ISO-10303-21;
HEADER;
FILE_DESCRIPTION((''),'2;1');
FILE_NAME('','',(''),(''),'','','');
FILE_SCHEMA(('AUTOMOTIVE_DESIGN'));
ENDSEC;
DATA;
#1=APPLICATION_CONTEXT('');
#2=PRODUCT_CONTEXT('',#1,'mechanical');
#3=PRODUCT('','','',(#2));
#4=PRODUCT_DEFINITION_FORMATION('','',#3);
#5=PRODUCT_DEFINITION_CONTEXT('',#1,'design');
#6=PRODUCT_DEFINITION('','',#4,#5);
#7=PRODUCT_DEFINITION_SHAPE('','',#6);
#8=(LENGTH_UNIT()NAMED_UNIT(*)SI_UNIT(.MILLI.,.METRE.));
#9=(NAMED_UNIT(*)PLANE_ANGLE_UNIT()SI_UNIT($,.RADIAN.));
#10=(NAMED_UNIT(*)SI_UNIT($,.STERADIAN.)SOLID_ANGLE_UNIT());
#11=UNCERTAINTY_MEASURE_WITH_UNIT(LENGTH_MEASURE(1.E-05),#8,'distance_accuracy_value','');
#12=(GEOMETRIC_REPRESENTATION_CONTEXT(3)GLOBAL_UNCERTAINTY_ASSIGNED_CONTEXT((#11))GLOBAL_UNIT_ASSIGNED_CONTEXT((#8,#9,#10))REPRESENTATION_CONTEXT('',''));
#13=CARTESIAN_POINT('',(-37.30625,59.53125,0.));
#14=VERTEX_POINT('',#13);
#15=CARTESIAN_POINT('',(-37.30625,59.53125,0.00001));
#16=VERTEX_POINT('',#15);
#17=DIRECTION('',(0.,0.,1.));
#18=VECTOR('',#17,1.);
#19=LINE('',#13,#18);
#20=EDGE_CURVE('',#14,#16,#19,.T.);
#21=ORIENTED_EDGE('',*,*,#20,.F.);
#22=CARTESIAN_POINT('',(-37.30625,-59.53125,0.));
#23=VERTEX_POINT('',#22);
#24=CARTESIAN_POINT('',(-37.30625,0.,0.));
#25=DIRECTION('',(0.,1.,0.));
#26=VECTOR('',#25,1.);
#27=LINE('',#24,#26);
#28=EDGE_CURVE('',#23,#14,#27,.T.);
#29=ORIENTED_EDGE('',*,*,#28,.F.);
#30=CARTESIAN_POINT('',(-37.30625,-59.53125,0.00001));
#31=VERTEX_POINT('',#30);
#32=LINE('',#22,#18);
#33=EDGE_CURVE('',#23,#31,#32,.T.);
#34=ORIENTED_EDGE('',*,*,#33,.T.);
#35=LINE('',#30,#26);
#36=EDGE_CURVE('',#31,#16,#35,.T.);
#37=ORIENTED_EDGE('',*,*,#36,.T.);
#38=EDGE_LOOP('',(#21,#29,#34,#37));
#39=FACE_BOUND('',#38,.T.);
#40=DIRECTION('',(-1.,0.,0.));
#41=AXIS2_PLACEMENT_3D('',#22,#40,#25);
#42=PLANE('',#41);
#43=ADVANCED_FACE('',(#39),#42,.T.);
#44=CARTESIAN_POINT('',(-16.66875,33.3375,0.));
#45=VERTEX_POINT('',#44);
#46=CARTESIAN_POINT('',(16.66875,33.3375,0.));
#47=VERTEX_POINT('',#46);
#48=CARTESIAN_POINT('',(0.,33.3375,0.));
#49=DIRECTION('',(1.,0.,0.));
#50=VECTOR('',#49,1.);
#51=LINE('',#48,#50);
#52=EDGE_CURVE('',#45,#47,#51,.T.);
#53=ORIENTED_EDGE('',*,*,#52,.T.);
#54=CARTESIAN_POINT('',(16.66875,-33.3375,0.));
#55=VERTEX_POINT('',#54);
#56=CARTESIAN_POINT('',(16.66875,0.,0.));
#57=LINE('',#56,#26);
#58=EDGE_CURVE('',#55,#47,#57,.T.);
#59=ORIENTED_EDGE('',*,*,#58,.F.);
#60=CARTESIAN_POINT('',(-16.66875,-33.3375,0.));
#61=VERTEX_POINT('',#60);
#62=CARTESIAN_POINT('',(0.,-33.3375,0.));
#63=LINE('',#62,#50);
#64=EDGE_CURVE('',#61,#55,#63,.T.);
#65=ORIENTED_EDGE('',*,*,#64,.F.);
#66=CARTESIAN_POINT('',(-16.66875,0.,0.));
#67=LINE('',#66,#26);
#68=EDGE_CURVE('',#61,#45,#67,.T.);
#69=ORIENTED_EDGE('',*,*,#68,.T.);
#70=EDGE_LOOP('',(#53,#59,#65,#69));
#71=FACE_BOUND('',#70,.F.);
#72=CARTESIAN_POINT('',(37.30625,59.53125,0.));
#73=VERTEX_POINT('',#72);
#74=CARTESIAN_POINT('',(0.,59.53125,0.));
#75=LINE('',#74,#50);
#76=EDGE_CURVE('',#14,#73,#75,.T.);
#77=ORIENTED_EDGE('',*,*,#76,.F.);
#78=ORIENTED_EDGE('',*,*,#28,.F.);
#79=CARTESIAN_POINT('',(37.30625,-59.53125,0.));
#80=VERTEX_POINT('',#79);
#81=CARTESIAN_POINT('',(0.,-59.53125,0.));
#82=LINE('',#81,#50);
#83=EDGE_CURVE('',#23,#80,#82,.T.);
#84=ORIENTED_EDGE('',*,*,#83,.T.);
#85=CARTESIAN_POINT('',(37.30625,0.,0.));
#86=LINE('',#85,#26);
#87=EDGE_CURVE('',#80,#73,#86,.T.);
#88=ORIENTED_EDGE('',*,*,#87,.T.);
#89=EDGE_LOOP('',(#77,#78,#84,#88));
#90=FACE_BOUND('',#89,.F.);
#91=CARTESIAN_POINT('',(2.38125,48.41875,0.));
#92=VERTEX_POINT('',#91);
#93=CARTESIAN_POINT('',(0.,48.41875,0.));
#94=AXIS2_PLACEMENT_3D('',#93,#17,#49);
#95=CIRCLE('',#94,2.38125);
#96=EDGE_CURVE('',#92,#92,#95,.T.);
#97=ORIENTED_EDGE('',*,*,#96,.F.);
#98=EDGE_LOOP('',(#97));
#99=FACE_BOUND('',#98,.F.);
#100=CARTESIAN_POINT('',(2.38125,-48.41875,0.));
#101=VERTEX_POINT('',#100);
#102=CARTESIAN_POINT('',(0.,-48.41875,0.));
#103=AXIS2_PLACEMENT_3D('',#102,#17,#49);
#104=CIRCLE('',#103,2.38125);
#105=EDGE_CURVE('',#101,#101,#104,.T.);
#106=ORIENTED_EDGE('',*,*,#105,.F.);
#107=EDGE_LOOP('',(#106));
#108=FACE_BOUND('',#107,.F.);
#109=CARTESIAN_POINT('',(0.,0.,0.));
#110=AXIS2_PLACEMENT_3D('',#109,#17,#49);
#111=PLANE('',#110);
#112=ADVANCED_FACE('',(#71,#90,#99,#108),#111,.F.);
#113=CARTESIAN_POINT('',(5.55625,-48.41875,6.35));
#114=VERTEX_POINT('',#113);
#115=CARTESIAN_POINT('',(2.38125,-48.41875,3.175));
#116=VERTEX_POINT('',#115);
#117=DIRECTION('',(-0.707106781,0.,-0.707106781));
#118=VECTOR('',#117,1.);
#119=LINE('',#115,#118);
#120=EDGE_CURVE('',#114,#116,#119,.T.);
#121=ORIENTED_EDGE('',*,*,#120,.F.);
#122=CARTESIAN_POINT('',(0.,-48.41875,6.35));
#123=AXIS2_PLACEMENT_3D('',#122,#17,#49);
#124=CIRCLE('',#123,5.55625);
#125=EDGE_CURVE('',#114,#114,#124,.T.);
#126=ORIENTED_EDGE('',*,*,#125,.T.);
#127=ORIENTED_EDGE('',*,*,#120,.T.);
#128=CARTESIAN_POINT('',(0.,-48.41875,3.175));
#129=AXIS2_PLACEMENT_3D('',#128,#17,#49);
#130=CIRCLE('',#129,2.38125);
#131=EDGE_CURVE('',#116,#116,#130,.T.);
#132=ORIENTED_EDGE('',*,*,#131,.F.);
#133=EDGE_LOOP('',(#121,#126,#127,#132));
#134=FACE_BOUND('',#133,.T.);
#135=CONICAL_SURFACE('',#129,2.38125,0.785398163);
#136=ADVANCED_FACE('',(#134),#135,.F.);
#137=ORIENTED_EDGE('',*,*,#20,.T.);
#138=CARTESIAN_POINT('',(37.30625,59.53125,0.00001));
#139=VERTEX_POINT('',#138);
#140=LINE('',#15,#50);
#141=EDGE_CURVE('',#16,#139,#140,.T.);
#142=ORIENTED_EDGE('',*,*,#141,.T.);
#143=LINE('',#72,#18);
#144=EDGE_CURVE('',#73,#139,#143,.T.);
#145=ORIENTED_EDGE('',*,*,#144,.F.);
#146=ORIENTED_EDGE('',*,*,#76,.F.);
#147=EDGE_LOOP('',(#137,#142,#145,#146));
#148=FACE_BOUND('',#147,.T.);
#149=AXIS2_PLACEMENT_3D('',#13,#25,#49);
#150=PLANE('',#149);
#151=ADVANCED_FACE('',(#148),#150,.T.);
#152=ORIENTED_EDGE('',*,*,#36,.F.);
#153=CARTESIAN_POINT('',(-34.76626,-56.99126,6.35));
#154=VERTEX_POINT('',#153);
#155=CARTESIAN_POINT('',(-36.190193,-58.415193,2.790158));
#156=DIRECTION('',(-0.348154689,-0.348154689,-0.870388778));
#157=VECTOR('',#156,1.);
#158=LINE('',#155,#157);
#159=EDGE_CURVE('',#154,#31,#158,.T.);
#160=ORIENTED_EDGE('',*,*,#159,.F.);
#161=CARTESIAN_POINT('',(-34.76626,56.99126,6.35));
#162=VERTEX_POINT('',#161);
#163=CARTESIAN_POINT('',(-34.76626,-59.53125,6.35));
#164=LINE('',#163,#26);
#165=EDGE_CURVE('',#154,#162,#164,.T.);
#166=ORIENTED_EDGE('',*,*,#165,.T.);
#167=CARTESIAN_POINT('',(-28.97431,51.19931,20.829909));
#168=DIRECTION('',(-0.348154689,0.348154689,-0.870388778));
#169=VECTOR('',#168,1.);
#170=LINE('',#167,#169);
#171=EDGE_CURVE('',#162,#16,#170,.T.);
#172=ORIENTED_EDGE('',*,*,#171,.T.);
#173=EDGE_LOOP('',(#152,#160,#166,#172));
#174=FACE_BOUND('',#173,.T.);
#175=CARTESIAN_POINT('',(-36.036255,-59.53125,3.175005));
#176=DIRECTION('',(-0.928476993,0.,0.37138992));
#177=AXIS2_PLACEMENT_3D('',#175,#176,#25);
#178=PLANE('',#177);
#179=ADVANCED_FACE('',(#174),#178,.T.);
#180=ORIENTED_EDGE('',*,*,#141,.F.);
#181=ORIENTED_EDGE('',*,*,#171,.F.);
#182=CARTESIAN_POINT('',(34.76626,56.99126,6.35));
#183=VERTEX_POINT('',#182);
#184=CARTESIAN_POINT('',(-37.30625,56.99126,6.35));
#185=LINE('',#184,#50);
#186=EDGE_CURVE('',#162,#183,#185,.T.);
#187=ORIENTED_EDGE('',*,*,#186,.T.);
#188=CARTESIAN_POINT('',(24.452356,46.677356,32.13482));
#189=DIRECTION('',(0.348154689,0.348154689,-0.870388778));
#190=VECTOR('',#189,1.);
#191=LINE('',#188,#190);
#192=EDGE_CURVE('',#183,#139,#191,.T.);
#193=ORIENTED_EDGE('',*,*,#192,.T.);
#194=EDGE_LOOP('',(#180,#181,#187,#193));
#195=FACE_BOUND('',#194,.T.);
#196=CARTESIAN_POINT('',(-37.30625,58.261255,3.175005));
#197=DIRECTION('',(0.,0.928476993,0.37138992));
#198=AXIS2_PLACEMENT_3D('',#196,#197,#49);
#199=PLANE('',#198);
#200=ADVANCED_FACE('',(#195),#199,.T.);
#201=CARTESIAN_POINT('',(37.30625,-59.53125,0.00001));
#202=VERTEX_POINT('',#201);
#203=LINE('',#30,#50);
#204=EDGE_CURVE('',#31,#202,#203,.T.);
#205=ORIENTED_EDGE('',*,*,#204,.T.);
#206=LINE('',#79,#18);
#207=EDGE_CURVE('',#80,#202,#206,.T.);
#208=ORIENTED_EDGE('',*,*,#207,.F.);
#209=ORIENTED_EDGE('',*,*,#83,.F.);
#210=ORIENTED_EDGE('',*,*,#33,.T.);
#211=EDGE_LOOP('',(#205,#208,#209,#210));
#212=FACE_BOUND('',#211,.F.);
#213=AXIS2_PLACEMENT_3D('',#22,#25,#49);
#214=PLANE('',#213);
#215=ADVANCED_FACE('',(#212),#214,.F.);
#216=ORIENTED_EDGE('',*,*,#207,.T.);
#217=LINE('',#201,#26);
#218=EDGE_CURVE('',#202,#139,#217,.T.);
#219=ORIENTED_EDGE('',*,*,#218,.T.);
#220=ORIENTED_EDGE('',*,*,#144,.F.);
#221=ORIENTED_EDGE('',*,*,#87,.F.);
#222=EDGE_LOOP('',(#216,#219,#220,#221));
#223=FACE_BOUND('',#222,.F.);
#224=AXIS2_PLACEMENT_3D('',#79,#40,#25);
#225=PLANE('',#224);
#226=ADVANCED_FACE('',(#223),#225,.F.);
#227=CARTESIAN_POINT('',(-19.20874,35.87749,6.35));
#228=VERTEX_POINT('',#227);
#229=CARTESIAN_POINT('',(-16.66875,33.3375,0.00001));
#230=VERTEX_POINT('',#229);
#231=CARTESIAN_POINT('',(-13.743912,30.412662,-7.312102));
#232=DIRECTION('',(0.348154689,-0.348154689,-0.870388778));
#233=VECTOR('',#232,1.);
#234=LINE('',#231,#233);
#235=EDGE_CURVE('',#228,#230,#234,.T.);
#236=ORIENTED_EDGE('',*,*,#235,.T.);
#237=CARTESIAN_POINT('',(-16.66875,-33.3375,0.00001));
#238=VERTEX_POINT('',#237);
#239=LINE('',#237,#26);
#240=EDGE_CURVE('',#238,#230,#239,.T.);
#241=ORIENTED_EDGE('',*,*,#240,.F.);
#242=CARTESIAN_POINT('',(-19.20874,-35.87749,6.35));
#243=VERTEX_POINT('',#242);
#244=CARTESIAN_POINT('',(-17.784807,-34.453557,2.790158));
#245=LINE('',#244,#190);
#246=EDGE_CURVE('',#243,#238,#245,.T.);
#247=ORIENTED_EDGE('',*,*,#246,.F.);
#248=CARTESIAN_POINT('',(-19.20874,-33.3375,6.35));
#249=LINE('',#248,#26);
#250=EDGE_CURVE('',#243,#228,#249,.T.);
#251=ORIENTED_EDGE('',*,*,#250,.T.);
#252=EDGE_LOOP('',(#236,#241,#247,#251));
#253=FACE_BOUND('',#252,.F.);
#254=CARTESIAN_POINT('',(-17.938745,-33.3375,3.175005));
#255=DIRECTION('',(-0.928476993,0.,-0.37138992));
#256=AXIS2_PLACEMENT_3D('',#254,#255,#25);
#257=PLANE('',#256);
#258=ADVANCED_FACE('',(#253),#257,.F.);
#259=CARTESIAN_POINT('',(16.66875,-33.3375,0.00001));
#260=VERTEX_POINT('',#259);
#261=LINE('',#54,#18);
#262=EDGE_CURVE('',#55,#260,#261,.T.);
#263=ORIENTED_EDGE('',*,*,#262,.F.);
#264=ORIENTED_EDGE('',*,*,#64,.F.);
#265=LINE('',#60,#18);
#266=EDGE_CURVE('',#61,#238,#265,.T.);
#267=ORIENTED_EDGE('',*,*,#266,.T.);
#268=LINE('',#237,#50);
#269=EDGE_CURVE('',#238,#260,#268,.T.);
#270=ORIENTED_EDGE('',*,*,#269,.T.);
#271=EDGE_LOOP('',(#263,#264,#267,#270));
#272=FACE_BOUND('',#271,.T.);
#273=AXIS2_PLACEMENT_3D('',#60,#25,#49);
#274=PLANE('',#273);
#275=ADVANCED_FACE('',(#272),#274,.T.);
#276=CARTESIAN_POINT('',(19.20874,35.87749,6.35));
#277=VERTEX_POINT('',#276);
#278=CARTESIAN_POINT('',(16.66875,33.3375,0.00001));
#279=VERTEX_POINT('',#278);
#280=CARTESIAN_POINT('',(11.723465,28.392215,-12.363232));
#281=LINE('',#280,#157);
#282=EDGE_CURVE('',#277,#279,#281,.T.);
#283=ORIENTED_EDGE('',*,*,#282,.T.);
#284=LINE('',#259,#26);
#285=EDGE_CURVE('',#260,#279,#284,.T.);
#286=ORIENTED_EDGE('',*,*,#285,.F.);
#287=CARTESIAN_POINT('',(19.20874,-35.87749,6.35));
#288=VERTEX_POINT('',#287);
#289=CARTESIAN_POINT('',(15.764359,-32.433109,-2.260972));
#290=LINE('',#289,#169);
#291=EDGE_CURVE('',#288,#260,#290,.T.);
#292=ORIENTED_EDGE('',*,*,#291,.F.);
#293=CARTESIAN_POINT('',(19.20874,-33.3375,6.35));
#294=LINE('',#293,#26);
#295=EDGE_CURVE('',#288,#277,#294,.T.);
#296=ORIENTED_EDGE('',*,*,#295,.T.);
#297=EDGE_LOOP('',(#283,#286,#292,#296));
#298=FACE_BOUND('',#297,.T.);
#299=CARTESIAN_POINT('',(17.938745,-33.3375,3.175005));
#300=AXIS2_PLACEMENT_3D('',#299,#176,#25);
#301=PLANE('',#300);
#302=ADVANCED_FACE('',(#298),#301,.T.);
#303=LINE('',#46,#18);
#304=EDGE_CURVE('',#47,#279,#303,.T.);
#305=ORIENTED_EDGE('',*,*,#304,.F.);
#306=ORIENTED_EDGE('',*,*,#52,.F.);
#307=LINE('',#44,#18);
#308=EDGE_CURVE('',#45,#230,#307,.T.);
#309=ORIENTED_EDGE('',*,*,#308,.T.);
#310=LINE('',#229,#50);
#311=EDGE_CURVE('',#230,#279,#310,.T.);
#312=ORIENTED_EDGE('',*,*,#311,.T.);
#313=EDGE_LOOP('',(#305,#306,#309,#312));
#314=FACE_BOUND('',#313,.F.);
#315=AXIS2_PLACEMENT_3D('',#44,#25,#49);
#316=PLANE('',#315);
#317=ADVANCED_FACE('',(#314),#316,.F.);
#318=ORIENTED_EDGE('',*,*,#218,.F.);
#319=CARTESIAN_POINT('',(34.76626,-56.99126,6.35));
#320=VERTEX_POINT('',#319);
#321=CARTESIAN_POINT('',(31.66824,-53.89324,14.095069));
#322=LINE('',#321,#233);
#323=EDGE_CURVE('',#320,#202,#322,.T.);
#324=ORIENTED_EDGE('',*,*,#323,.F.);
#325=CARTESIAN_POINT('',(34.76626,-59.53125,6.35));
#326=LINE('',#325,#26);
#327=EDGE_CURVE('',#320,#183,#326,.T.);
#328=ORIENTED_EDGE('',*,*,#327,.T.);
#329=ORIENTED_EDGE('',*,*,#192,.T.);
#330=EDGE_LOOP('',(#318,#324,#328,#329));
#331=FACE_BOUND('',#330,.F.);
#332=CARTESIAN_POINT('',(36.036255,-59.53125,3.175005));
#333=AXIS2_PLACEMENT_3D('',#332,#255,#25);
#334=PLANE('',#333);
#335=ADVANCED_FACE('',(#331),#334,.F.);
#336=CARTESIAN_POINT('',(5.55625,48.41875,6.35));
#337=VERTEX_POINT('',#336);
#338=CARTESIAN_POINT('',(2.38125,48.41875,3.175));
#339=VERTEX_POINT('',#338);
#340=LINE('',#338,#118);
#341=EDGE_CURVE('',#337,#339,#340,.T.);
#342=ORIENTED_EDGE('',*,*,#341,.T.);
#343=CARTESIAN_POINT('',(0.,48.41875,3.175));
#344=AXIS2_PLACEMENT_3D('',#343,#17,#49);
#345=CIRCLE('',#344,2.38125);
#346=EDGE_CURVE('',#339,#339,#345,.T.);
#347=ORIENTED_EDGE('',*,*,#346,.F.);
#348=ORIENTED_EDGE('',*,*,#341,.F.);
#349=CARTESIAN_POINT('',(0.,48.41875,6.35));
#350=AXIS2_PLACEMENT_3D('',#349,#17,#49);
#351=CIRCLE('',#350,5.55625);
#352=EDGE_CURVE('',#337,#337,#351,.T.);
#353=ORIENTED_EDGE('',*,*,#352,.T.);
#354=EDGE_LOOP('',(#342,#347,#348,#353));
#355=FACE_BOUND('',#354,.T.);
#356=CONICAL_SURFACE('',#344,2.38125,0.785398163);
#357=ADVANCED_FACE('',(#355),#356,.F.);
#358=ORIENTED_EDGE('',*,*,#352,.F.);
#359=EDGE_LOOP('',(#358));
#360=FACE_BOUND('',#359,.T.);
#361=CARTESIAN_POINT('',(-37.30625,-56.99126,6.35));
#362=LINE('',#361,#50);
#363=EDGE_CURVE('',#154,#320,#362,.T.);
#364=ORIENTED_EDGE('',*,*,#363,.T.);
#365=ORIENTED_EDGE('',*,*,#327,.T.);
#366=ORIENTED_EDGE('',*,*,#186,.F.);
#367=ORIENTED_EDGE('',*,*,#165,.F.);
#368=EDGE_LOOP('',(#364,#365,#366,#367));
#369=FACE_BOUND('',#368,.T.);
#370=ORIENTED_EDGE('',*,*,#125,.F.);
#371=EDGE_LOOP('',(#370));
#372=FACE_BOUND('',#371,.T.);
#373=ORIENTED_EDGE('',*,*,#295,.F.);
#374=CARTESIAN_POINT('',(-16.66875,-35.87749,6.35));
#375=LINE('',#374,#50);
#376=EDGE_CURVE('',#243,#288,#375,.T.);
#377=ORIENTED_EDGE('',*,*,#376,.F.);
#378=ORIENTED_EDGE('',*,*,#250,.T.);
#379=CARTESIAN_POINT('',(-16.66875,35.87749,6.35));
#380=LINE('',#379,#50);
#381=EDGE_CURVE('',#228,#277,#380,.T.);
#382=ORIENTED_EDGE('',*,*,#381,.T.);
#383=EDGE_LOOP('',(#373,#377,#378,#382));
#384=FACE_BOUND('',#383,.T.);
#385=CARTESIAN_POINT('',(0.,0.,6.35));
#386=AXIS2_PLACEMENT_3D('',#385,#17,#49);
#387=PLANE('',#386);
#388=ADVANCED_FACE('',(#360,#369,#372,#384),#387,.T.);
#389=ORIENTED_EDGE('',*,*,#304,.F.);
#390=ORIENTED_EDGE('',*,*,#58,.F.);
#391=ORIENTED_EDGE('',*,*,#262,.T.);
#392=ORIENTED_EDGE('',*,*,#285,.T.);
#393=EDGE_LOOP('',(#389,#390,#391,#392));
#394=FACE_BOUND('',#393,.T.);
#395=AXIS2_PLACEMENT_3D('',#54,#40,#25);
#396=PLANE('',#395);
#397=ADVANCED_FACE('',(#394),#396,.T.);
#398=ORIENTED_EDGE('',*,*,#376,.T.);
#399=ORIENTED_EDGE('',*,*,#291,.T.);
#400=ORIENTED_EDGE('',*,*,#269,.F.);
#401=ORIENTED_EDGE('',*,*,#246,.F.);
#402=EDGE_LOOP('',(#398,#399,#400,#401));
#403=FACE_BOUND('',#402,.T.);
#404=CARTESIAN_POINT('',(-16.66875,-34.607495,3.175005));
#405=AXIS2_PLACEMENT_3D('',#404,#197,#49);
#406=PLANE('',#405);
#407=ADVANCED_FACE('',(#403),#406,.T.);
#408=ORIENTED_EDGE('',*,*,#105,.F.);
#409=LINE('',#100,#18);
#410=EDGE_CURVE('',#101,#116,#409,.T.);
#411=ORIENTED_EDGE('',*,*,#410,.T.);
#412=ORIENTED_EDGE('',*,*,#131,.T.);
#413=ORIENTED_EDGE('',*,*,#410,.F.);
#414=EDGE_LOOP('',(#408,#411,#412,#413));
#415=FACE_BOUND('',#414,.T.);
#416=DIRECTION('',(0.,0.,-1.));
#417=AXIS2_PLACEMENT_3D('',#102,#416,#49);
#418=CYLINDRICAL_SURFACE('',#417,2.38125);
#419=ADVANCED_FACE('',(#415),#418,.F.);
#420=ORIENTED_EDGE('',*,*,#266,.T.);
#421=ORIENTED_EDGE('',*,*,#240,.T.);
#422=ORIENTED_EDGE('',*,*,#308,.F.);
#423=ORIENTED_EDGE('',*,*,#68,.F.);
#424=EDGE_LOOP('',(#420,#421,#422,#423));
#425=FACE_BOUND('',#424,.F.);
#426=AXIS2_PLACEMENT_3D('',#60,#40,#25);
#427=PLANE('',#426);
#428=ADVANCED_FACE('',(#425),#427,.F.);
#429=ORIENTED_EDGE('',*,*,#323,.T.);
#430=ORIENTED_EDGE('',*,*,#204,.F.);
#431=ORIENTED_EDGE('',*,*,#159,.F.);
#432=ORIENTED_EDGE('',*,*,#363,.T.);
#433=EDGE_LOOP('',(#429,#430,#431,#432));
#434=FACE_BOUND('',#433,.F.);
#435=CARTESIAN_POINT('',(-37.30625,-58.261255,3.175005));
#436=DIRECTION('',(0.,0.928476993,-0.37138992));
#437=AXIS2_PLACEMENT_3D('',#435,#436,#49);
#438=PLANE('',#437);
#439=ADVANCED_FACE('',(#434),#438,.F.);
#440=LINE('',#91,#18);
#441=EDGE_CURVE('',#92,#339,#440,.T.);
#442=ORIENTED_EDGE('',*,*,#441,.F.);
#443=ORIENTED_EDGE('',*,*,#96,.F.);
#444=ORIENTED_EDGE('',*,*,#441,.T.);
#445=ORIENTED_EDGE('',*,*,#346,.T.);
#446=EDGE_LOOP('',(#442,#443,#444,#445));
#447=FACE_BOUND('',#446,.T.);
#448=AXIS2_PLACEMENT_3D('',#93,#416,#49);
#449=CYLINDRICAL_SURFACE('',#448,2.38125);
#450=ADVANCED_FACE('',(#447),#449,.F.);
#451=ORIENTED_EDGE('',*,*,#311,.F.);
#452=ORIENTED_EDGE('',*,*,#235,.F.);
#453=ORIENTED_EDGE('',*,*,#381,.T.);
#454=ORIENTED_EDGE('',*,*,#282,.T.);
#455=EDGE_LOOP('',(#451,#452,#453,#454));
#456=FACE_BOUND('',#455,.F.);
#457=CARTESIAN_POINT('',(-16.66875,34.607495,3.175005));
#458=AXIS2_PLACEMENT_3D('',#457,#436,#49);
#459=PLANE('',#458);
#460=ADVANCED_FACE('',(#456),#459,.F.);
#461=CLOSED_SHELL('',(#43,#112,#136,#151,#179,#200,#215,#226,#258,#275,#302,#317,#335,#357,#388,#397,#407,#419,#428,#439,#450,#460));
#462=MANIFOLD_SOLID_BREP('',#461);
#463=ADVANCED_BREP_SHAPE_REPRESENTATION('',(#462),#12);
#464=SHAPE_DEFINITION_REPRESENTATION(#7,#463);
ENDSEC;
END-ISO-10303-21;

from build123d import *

# Parameters (mm, degrees)
F0_W     = 74.6125
F0_H     = 119.0625
F0_R     = 2.38125
F0_W_2   = 33.3375
F0_H_2   = 66.675
F1_DEPTH = 6.35
F2_SIZE2 = 6.34999
F2_SIZE  = 2.53999
F3_SIZE  = 3.175


# Not quite as in the source:
# - a fillet or chamfer is up to 0.001 mm smaller than in the source, because OpenCascade refuses the exact size


with BuildPart() as f1:
    # F0 (on Top) → F1 (new body)
    with BuildSketch(Plane.XY):
        Rectangle(F0_W, F0_H)
        with Locations((0, -48.41875)):
            Circle(F0_R, mode=Mode.SUBTRACT)
        Rectangle(F0_W_2, F0_H_2, mode=Mode.SUBTRACT)
        with Locations((0, 48.41875)):
            Circle(F0_R, mode=Mode.SUBTRACT)
    extrude(amount=F1_DEPTH)

    # F2 (size 2.54 and 6.35 in the source; OpenCascade refuses exactly that, so slightly less here)
    f2_edges = [f1.edges().sort_by_distance(p)[0] for p in [
        (-16.66875, 0, 6.35),
        (0, -33.3375, 6.35),
        (16.66875, 0, 6.35),
        (0, 33.3375, 6.35),
        (0, 59.53125, 6.35),
        (37.30625, 0, 6.35),
        (0, -59.53125, 6.35),
        (-37.30625, 0, 6.35),
    ]]
    f2_side = f1.faces().sort_by_distance((0, -58.126156, 6.35))[0]
    chamfer(f2_edges, length=F2_SIZE, length2=F2_SIZE2, reference=f2_side)

    # F3
    f3_edges = [f1.edges().sort_by_distance(p)[0] for p in [
        (-2.38125, -48.41875, 6.35),
        (-2.38125, 48.41875, 6.35),
    ]]
    chamfer(f3_edges, length=F3_SIZE)


solid = f1.part
